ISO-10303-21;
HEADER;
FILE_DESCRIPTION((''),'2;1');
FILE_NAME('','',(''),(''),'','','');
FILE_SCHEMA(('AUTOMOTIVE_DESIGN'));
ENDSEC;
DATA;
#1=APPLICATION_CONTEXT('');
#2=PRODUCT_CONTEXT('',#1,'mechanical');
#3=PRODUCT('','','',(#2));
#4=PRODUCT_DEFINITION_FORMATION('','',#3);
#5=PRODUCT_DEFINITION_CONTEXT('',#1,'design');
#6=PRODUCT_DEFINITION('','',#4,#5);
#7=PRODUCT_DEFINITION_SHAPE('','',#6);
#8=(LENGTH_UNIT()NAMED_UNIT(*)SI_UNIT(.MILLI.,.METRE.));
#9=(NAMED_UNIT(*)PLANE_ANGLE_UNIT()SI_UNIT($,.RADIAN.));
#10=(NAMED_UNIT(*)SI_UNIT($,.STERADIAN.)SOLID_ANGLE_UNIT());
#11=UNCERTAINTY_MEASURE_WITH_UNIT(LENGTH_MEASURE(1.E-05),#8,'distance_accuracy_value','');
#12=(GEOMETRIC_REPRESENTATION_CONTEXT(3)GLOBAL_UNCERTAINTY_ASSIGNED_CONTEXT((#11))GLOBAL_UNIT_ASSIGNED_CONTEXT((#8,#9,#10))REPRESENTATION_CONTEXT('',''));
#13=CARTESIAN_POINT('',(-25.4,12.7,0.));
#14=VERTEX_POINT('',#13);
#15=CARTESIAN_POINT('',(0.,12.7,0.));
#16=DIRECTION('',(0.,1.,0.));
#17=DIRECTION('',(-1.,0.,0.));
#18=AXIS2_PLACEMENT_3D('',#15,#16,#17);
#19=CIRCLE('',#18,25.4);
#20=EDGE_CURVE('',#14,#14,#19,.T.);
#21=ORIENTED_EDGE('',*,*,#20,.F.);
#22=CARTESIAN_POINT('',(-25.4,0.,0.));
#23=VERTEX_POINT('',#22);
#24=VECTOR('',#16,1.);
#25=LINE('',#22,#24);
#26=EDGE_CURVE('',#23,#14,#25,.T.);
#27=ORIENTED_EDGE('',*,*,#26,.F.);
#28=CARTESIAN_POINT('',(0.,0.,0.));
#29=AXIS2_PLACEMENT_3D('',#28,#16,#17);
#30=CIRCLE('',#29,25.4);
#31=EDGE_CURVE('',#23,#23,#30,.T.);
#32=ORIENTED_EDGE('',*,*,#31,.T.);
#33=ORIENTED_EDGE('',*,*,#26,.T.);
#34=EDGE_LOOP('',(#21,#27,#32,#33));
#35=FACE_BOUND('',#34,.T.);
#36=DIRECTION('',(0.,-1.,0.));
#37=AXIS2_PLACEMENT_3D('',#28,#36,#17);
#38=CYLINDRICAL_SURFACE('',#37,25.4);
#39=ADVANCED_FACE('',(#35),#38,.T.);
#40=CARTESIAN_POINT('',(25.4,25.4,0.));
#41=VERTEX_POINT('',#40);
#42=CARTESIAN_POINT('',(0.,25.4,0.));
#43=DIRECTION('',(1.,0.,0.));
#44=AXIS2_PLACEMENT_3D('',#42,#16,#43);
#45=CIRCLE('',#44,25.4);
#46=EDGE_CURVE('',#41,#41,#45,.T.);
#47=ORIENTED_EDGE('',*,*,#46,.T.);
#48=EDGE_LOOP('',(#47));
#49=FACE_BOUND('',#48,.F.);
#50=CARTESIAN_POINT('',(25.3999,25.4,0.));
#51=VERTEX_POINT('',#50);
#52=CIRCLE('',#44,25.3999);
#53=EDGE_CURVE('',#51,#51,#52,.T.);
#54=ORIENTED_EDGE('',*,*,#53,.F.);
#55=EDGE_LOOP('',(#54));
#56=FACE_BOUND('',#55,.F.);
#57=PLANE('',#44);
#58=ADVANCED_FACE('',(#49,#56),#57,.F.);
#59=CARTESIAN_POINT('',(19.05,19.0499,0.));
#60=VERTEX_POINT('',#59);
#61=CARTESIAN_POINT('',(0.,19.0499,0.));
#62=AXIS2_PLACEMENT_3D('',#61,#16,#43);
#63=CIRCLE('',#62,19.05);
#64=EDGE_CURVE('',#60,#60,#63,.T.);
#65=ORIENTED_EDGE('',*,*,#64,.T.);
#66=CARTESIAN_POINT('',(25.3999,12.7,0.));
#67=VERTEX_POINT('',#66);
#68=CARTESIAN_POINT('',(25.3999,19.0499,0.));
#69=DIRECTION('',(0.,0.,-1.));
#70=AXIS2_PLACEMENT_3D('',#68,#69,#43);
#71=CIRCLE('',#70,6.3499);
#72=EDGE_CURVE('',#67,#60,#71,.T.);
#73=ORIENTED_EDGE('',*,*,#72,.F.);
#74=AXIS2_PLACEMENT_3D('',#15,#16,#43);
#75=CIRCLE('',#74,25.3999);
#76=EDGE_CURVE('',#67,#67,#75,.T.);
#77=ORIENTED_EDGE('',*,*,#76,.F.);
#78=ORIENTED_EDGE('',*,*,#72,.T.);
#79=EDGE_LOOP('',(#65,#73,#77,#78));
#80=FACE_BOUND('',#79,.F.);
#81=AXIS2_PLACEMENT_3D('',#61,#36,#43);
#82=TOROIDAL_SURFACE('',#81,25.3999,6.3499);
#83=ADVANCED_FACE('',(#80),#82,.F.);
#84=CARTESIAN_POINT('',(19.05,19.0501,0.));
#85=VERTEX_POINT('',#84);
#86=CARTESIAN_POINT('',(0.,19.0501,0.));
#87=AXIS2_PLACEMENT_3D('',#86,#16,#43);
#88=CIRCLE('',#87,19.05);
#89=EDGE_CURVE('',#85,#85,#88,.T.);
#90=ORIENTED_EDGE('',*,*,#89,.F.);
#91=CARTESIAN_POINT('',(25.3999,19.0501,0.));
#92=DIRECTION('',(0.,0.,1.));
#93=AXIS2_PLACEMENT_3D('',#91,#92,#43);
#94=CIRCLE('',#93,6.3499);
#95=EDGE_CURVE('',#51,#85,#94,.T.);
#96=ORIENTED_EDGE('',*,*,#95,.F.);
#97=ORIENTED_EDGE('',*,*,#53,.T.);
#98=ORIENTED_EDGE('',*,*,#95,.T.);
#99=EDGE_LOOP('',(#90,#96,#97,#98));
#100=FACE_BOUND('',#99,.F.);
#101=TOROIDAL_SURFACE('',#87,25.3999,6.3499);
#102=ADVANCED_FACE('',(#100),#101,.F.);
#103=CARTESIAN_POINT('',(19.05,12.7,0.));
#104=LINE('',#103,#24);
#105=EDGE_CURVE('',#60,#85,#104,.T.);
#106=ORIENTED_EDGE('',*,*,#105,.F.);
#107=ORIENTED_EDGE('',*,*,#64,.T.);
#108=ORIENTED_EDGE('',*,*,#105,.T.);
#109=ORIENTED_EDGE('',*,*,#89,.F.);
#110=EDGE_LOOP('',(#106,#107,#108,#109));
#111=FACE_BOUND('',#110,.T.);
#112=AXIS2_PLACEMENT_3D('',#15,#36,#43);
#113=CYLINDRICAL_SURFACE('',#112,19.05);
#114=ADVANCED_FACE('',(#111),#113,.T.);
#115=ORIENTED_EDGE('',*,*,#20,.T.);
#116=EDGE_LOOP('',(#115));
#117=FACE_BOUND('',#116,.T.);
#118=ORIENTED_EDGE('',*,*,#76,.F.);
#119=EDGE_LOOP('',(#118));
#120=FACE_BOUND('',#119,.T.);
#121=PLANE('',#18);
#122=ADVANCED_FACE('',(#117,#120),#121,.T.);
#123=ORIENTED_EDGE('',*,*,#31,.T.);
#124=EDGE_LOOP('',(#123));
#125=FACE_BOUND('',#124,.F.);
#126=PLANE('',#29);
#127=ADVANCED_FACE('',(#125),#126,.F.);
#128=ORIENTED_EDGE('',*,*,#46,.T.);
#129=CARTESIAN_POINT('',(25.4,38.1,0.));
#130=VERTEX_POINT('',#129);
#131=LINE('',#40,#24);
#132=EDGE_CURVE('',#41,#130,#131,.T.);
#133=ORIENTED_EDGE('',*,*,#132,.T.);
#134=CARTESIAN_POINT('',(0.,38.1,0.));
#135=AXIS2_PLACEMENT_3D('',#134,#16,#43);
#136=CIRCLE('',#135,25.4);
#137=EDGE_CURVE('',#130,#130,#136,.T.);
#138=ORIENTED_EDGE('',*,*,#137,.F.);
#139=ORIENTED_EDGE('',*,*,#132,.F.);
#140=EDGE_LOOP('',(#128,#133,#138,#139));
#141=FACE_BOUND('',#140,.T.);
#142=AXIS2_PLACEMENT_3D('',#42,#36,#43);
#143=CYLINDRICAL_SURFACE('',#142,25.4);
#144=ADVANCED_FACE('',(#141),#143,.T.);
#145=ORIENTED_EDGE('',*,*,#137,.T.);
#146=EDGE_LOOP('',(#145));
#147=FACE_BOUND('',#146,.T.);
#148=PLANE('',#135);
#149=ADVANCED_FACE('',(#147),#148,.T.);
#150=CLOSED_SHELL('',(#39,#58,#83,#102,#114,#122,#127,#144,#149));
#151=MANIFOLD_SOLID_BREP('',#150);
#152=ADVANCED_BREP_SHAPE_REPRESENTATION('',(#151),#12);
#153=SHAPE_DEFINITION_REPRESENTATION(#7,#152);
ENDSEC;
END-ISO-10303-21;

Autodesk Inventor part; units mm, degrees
ref_plane "YZ Plane" through (0, 0, 0) normal (1, 0, 0) x (0, 1, 0)
ref_plane "XZ Plane" through (0, 0, 0) normal (0, 1, 0) x (-1, 0, 0)
ref_plane "XY Plane" through (0, 0, 0) normal (0, 0, 1) x (1, 0, 0)
sketch "Sketch1" plane through (0, 0, 0) normal (0, 1, 0) x (-1, 0, 0)
  circle A0 centre (0, 0) radius 25.4
  dimension "d0" = 50.8
extrude "Extrusion1" add sketch "Sketch1" along normal blind 12.7
sketch "Sketch2" plane through (0, 12.7, 0) normal (0, 1, 0) x (1, 0, 0)
  circle A0 centre (0, 0) radius 19.05
  dimension "d3" = 38.1
extrude "Extrusion2" add sketch "Sketch2" along normal blind 12.7
fillet "Fillet1" radius 6.35 1 edges at (-19.05, 12.7, 0)
sketch "Sketch3" plane through (0, 25.4, 0) normal (0, 1, 0) x (1, 0, 0)
  circle A0 centre (0, 0) radius 25.4
  dimension "d7" = 50.8
extrude "Extrusion3" add sketch "Sketch3" along normal blind 12.7
fillet "Fillet2" radius 6.35 1 edges at (-19.05, 25.4, 0)
